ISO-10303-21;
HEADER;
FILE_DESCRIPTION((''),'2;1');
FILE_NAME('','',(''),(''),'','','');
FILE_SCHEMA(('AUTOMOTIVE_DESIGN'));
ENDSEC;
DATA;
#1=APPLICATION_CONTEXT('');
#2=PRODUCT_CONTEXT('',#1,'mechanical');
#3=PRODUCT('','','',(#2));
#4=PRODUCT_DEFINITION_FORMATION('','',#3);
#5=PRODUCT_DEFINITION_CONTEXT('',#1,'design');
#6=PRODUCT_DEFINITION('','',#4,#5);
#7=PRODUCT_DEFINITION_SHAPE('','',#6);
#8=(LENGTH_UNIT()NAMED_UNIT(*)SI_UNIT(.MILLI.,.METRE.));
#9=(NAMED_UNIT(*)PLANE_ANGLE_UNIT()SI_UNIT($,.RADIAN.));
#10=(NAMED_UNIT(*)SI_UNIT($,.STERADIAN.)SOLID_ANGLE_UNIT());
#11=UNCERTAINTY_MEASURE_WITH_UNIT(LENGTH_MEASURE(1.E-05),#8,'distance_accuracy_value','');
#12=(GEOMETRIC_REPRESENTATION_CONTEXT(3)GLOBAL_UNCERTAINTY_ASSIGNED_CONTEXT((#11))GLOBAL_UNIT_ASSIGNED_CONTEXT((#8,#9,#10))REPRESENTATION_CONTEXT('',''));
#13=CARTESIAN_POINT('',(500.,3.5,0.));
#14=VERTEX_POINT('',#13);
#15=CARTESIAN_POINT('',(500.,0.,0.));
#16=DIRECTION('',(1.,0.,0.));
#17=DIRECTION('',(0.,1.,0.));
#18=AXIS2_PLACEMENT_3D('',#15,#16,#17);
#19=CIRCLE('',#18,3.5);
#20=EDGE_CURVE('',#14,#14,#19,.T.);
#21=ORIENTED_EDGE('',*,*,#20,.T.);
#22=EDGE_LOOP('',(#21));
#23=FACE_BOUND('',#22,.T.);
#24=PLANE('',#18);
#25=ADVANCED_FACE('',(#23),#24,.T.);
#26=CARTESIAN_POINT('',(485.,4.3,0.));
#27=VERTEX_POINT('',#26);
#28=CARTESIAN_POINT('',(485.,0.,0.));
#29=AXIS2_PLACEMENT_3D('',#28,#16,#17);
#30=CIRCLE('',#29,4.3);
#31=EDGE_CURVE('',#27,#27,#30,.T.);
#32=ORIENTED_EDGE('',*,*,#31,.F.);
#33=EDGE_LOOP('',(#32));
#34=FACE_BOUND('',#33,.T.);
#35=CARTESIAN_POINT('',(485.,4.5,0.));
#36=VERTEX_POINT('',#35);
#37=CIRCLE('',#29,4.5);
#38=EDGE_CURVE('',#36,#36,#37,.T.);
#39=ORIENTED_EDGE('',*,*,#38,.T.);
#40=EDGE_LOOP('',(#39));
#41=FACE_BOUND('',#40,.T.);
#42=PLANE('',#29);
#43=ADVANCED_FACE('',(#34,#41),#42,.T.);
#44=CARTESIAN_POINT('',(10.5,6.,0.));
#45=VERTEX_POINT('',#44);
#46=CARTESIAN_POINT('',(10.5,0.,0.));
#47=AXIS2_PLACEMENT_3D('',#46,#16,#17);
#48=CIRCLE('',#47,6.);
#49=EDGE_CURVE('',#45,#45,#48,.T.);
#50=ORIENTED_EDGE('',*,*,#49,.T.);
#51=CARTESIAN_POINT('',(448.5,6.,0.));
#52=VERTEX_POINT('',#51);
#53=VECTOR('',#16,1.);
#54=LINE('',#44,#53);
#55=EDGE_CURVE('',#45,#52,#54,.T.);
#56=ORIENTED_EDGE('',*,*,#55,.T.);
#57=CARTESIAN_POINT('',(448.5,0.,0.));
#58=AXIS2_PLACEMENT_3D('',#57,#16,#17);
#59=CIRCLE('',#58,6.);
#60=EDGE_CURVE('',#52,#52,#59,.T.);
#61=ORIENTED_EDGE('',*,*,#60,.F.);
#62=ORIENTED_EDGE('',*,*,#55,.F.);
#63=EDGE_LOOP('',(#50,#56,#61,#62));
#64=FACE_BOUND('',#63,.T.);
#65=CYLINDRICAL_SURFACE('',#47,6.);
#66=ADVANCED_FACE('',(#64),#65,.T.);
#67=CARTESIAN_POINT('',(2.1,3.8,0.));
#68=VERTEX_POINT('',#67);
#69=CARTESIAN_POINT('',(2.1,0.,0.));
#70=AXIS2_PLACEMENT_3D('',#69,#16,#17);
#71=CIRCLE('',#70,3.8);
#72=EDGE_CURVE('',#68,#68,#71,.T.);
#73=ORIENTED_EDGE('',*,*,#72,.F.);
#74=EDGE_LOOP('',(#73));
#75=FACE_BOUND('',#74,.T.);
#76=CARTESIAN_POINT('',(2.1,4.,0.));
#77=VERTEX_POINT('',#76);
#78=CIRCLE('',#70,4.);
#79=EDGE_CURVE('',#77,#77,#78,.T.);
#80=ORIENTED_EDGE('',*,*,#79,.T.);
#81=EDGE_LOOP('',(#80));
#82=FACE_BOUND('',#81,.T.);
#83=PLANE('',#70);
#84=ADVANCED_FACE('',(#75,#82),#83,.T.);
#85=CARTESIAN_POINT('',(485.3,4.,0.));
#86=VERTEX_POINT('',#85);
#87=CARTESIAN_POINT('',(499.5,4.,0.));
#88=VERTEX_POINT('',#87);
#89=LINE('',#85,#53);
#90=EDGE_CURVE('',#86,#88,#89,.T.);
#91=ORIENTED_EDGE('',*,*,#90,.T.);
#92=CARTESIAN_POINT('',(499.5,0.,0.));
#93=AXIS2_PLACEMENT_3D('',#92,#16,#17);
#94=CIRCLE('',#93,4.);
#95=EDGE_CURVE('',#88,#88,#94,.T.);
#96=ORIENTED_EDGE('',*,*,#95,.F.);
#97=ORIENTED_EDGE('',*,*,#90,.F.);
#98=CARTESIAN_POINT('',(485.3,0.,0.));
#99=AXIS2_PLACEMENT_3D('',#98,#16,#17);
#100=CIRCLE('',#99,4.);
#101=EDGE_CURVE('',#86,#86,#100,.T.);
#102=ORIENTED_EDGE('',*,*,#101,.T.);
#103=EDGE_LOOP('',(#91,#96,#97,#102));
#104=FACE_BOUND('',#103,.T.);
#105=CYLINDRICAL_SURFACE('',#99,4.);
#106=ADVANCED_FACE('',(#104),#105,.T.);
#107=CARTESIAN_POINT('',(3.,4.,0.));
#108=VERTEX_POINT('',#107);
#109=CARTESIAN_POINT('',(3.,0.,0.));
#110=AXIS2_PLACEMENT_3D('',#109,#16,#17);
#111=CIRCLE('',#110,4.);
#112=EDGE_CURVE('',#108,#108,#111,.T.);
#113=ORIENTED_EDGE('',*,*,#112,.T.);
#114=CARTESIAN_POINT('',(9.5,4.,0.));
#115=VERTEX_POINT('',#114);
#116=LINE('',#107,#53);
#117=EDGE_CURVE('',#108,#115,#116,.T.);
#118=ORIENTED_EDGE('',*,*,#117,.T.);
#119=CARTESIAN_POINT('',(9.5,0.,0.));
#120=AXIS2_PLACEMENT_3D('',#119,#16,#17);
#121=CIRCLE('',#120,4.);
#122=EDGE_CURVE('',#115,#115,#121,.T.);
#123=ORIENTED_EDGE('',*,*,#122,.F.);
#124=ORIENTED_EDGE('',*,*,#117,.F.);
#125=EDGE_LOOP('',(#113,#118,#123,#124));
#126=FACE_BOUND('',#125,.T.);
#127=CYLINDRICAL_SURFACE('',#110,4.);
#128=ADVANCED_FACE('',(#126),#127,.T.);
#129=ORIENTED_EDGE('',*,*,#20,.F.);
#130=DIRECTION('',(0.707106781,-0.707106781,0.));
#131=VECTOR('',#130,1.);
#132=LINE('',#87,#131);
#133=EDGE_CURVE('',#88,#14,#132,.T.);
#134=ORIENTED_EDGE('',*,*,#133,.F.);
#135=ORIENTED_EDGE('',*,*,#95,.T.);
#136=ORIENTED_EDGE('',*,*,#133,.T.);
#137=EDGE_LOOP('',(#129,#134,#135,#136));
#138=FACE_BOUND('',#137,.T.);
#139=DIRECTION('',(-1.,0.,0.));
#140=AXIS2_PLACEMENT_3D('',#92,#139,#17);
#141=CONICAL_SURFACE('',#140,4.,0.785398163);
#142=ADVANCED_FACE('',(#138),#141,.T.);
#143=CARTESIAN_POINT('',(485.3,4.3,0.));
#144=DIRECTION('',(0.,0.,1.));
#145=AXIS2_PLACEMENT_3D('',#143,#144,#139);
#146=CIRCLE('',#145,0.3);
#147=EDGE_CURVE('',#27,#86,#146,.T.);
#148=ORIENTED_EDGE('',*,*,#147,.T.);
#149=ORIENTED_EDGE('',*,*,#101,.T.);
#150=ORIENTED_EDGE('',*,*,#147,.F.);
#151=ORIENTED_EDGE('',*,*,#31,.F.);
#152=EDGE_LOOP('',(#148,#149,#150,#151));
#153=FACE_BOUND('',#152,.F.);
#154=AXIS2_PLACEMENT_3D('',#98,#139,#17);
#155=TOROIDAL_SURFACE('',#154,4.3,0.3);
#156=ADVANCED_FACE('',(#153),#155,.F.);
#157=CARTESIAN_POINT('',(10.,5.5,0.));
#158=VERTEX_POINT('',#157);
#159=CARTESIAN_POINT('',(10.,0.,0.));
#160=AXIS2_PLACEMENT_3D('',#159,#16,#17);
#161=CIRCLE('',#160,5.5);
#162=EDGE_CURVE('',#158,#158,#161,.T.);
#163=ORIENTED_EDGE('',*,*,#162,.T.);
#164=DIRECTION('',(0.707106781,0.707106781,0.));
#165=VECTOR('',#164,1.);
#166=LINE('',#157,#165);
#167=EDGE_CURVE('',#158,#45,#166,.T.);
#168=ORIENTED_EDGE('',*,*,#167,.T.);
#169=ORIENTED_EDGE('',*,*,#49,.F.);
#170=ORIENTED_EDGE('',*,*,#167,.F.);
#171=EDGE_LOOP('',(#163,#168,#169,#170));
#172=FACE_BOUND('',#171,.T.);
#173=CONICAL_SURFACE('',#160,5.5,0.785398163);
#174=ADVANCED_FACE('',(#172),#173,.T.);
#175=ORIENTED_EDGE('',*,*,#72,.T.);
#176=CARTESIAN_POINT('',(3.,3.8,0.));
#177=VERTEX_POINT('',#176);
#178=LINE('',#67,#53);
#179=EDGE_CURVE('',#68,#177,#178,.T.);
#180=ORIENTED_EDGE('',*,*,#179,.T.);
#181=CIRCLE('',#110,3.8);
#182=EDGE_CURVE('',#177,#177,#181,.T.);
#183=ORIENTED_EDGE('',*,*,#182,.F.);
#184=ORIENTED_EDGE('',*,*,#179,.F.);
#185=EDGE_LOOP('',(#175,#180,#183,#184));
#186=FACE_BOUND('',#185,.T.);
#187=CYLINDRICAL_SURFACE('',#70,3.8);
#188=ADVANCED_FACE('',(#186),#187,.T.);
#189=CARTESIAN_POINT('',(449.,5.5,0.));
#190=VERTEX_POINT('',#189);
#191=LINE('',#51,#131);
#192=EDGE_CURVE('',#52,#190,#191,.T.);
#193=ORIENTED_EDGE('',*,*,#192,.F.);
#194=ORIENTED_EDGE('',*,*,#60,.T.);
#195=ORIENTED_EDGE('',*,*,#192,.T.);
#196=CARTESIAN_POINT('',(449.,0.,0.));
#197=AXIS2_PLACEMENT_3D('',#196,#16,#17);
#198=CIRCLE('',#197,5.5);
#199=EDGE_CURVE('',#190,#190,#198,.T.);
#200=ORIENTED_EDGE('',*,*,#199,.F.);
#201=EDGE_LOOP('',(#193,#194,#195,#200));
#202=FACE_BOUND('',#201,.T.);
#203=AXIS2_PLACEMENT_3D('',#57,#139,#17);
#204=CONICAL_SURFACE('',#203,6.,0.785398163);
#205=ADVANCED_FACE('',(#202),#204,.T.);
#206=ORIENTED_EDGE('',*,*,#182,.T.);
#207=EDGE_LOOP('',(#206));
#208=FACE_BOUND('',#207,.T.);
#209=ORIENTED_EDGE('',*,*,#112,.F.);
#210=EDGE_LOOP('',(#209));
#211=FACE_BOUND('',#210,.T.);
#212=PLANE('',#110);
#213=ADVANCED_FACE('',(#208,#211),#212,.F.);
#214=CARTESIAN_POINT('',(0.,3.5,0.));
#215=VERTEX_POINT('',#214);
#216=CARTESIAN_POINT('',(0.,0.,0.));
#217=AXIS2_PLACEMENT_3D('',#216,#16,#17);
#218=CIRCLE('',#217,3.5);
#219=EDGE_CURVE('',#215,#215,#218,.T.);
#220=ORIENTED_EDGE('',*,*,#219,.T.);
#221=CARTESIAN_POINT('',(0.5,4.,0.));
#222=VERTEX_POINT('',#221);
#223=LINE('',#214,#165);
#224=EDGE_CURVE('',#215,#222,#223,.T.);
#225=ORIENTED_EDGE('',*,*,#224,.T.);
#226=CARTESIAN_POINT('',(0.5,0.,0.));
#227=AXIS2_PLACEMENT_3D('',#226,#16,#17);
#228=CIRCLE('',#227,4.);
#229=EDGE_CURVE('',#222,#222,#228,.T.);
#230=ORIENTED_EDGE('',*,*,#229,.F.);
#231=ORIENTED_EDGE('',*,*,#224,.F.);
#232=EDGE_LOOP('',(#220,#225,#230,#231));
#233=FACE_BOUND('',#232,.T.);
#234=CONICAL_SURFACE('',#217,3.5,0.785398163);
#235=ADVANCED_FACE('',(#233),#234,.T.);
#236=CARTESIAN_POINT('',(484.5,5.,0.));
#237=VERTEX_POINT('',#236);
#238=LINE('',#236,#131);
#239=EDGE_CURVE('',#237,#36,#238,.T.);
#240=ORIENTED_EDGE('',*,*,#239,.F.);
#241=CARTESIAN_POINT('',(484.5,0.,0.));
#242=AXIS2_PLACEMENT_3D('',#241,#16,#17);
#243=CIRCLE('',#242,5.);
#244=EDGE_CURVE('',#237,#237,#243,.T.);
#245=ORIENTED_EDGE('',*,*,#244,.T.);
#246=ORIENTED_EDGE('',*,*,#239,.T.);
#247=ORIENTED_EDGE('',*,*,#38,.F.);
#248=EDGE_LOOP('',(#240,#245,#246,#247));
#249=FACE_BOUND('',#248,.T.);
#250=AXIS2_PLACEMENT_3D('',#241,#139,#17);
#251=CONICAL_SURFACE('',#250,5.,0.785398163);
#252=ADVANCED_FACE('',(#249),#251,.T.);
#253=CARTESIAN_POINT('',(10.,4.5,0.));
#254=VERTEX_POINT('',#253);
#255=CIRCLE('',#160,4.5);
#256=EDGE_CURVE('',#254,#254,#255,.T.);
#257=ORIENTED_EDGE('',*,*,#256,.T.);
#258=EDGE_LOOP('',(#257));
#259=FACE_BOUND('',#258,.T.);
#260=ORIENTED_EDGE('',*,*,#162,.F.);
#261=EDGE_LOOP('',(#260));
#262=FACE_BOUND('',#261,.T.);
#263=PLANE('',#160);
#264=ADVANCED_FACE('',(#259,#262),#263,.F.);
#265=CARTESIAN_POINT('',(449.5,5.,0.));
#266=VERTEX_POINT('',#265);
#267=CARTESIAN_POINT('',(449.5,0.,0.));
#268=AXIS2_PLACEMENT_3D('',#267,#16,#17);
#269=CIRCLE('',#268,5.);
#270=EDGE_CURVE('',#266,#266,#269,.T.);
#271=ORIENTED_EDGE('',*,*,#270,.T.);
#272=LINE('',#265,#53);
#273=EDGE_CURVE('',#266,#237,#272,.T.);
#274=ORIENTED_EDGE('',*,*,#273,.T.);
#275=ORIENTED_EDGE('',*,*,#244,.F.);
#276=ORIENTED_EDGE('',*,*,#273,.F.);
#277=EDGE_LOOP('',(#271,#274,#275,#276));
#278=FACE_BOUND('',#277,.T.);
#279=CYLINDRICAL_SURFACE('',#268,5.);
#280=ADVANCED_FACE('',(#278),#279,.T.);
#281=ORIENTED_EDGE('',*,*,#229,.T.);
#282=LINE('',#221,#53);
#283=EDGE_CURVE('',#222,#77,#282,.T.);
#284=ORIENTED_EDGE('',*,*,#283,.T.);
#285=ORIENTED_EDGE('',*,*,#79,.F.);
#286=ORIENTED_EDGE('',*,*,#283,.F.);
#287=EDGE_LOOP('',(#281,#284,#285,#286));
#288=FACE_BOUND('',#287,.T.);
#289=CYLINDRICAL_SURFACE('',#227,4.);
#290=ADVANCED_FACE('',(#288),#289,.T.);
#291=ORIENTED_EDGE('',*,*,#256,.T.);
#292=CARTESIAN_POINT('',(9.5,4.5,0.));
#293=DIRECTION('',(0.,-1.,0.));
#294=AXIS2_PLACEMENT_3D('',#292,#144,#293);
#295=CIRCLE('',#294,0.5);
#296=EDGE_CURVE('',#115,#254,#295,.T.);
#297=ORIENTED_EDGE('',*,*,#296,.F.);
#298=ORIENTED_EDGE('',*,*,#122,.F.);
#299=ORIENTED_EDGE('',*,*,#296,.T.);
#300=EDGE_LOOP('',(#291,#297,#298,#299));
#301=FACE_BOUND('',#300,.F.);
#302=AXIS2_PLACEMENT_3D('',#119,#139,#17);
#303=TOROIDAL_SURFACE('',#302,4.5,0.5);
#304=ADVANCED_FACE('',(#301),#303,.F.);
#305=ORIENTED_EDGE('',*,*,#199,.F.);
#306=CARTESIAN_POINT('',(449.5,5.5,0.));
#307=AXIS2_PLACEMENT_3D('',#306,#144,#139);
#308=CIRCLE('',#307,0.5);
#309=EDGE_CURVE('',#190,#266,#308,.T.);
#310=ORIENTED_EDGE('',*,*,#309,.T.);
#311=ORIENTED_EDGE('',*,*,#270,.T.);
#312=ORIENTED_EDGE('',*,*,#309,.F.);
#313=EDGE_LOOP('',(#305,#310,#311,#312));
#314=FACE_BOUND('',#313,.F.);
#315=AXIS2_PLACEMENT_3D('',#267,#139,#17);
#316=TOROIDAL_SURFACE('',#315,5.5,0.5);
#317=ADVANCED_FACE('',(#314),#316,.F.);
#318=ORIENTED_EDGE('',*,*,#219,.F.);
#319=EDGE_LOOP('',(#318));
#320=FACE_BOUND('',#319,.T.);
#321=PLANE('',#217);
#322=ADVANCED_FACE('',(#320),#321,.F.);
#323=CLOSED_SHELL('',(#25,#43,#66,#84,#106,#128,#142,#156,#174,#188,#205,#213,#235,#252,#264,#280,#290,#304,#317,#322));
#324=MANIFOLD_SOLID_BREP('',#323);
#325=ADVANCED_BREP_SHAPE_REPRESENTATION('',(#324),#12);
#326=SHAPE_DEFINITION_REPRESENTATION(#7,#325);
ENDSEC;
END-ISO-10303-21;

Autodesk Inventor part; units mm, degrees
sketch "Sketch_1" plane through (0, 0, 0) normal (0, 0, 1) x (1, 0, 0)
  line L0 (449.5, 0) -> (0, 0)
  line L1 (0, 0) -> (0, 3.5)
  line L2 (0, 3.5) -> (0.5, 4)
  line L3 (0.5, 4) -> (2.1, 4)
  line L4 (2.1, 4) -> (2.1, 3.8)
  line L5 (2.1, 3.8) -> (3, 3.8)
  line L6 (3, 3.8) -> (3, 4)
  line L7 (3, 4) -> (9.5, 4)
  arc A0 (9.5, 4) -> (10, 4.5) centre (9.5, 4.5) ccw
  line L8 (10, 4.5) -> (10, 5.5)
  line L9 (10, 5.5) -> (10.5, 6)
  line L10 (10.5, 6) -> (448.5, 6)
  line L11 (448.5, 6) -> (449, 5.5)
  arc A1 (449, 5.5) -> (449.5, 5) centre (449.5, 5.5) ccw
  line L12 (449.5, 5) -> (449.5, 0)
  line L13 (449.5, 0) -> (0, 0)
revolve "Revolution1" add sketch "Sketch_1" angle 360 about axis through (449.5, 0, 0) along (1, 0, 0)
thread "Thread1" size "M12x1.5" class "6g" standard "ISO Metric profile" full length
sketch "_____2" plane through (0, 0, 0) normal (0, 0, 1) x (1, 0, 0)
  line L0 (500, 0) -> (449.5, 0)
  line L1 (449.5, 0) -> (449.5, 5)
  line L2 (449.5, 5) -> (484.5, 5)
  line L3 (484.5, 5) -> (485, 4.5)
  line L4 (485, 4.5) -> (485, 4.3)
  arc A0 (485, 4.3) -> (485.3, 4) centre (485.3, 4.3) ccw
  line L5 (485.3, 4) -> (499.5, 4)
  line L6 (499.5, 4) -> (500, 3.5)
  line L7 (500, 3.5) -> (500, 0)
  line L8 (500, 0) -> (449.5, 0)
revolve "Revolution2" add sketch "_____2" angle 360 about axis through (500, 0, 0) along (1, 0, 0)
thread "Thread2" size "M10x1" class "6g" standard "ISO Metric profile" length 10.5
ref_plane "to_collar_XY" through (449, 0, 0) normal (1, 0, 0) x (0, 0, -1)
ref_plane "to_collar_YZ" through (449, 0, 0) normal (0, 0, -1) x (0, 1, 0)
ref_plane "to_collar_ZX" through (449, 0, 0) normal (0, 1, 0) x (1, 0, 0)
ref_plane "to_dummy_XY" through (10, 0, 0) normal (1, 0, 0) x (0, 0, -1)
ref_plane "to_dummy_YZ" through (10, 0, 0) normal (0, 0, -1) x (0, 1, 0)
ref_plane "to_dummy_ZX" through (10, 0, 0) normal (0, 1, 0) x (1, 0, 0)
ref_plane "to_nut_XY" through (229.5, 0, 0) normal (1, 0, 0) x (0, 0, -1)
ref_plane "to_nut_YZ" through (229.5, 0, 0) normal (0, 0, -1) x (0, 1, 0)
ref_plane "to_nut_ZX" through (229.5, 0, 0) normal (0, 1, 0) x (1, 0, 0)
properties part number "C-TBSE1204-500_t"
